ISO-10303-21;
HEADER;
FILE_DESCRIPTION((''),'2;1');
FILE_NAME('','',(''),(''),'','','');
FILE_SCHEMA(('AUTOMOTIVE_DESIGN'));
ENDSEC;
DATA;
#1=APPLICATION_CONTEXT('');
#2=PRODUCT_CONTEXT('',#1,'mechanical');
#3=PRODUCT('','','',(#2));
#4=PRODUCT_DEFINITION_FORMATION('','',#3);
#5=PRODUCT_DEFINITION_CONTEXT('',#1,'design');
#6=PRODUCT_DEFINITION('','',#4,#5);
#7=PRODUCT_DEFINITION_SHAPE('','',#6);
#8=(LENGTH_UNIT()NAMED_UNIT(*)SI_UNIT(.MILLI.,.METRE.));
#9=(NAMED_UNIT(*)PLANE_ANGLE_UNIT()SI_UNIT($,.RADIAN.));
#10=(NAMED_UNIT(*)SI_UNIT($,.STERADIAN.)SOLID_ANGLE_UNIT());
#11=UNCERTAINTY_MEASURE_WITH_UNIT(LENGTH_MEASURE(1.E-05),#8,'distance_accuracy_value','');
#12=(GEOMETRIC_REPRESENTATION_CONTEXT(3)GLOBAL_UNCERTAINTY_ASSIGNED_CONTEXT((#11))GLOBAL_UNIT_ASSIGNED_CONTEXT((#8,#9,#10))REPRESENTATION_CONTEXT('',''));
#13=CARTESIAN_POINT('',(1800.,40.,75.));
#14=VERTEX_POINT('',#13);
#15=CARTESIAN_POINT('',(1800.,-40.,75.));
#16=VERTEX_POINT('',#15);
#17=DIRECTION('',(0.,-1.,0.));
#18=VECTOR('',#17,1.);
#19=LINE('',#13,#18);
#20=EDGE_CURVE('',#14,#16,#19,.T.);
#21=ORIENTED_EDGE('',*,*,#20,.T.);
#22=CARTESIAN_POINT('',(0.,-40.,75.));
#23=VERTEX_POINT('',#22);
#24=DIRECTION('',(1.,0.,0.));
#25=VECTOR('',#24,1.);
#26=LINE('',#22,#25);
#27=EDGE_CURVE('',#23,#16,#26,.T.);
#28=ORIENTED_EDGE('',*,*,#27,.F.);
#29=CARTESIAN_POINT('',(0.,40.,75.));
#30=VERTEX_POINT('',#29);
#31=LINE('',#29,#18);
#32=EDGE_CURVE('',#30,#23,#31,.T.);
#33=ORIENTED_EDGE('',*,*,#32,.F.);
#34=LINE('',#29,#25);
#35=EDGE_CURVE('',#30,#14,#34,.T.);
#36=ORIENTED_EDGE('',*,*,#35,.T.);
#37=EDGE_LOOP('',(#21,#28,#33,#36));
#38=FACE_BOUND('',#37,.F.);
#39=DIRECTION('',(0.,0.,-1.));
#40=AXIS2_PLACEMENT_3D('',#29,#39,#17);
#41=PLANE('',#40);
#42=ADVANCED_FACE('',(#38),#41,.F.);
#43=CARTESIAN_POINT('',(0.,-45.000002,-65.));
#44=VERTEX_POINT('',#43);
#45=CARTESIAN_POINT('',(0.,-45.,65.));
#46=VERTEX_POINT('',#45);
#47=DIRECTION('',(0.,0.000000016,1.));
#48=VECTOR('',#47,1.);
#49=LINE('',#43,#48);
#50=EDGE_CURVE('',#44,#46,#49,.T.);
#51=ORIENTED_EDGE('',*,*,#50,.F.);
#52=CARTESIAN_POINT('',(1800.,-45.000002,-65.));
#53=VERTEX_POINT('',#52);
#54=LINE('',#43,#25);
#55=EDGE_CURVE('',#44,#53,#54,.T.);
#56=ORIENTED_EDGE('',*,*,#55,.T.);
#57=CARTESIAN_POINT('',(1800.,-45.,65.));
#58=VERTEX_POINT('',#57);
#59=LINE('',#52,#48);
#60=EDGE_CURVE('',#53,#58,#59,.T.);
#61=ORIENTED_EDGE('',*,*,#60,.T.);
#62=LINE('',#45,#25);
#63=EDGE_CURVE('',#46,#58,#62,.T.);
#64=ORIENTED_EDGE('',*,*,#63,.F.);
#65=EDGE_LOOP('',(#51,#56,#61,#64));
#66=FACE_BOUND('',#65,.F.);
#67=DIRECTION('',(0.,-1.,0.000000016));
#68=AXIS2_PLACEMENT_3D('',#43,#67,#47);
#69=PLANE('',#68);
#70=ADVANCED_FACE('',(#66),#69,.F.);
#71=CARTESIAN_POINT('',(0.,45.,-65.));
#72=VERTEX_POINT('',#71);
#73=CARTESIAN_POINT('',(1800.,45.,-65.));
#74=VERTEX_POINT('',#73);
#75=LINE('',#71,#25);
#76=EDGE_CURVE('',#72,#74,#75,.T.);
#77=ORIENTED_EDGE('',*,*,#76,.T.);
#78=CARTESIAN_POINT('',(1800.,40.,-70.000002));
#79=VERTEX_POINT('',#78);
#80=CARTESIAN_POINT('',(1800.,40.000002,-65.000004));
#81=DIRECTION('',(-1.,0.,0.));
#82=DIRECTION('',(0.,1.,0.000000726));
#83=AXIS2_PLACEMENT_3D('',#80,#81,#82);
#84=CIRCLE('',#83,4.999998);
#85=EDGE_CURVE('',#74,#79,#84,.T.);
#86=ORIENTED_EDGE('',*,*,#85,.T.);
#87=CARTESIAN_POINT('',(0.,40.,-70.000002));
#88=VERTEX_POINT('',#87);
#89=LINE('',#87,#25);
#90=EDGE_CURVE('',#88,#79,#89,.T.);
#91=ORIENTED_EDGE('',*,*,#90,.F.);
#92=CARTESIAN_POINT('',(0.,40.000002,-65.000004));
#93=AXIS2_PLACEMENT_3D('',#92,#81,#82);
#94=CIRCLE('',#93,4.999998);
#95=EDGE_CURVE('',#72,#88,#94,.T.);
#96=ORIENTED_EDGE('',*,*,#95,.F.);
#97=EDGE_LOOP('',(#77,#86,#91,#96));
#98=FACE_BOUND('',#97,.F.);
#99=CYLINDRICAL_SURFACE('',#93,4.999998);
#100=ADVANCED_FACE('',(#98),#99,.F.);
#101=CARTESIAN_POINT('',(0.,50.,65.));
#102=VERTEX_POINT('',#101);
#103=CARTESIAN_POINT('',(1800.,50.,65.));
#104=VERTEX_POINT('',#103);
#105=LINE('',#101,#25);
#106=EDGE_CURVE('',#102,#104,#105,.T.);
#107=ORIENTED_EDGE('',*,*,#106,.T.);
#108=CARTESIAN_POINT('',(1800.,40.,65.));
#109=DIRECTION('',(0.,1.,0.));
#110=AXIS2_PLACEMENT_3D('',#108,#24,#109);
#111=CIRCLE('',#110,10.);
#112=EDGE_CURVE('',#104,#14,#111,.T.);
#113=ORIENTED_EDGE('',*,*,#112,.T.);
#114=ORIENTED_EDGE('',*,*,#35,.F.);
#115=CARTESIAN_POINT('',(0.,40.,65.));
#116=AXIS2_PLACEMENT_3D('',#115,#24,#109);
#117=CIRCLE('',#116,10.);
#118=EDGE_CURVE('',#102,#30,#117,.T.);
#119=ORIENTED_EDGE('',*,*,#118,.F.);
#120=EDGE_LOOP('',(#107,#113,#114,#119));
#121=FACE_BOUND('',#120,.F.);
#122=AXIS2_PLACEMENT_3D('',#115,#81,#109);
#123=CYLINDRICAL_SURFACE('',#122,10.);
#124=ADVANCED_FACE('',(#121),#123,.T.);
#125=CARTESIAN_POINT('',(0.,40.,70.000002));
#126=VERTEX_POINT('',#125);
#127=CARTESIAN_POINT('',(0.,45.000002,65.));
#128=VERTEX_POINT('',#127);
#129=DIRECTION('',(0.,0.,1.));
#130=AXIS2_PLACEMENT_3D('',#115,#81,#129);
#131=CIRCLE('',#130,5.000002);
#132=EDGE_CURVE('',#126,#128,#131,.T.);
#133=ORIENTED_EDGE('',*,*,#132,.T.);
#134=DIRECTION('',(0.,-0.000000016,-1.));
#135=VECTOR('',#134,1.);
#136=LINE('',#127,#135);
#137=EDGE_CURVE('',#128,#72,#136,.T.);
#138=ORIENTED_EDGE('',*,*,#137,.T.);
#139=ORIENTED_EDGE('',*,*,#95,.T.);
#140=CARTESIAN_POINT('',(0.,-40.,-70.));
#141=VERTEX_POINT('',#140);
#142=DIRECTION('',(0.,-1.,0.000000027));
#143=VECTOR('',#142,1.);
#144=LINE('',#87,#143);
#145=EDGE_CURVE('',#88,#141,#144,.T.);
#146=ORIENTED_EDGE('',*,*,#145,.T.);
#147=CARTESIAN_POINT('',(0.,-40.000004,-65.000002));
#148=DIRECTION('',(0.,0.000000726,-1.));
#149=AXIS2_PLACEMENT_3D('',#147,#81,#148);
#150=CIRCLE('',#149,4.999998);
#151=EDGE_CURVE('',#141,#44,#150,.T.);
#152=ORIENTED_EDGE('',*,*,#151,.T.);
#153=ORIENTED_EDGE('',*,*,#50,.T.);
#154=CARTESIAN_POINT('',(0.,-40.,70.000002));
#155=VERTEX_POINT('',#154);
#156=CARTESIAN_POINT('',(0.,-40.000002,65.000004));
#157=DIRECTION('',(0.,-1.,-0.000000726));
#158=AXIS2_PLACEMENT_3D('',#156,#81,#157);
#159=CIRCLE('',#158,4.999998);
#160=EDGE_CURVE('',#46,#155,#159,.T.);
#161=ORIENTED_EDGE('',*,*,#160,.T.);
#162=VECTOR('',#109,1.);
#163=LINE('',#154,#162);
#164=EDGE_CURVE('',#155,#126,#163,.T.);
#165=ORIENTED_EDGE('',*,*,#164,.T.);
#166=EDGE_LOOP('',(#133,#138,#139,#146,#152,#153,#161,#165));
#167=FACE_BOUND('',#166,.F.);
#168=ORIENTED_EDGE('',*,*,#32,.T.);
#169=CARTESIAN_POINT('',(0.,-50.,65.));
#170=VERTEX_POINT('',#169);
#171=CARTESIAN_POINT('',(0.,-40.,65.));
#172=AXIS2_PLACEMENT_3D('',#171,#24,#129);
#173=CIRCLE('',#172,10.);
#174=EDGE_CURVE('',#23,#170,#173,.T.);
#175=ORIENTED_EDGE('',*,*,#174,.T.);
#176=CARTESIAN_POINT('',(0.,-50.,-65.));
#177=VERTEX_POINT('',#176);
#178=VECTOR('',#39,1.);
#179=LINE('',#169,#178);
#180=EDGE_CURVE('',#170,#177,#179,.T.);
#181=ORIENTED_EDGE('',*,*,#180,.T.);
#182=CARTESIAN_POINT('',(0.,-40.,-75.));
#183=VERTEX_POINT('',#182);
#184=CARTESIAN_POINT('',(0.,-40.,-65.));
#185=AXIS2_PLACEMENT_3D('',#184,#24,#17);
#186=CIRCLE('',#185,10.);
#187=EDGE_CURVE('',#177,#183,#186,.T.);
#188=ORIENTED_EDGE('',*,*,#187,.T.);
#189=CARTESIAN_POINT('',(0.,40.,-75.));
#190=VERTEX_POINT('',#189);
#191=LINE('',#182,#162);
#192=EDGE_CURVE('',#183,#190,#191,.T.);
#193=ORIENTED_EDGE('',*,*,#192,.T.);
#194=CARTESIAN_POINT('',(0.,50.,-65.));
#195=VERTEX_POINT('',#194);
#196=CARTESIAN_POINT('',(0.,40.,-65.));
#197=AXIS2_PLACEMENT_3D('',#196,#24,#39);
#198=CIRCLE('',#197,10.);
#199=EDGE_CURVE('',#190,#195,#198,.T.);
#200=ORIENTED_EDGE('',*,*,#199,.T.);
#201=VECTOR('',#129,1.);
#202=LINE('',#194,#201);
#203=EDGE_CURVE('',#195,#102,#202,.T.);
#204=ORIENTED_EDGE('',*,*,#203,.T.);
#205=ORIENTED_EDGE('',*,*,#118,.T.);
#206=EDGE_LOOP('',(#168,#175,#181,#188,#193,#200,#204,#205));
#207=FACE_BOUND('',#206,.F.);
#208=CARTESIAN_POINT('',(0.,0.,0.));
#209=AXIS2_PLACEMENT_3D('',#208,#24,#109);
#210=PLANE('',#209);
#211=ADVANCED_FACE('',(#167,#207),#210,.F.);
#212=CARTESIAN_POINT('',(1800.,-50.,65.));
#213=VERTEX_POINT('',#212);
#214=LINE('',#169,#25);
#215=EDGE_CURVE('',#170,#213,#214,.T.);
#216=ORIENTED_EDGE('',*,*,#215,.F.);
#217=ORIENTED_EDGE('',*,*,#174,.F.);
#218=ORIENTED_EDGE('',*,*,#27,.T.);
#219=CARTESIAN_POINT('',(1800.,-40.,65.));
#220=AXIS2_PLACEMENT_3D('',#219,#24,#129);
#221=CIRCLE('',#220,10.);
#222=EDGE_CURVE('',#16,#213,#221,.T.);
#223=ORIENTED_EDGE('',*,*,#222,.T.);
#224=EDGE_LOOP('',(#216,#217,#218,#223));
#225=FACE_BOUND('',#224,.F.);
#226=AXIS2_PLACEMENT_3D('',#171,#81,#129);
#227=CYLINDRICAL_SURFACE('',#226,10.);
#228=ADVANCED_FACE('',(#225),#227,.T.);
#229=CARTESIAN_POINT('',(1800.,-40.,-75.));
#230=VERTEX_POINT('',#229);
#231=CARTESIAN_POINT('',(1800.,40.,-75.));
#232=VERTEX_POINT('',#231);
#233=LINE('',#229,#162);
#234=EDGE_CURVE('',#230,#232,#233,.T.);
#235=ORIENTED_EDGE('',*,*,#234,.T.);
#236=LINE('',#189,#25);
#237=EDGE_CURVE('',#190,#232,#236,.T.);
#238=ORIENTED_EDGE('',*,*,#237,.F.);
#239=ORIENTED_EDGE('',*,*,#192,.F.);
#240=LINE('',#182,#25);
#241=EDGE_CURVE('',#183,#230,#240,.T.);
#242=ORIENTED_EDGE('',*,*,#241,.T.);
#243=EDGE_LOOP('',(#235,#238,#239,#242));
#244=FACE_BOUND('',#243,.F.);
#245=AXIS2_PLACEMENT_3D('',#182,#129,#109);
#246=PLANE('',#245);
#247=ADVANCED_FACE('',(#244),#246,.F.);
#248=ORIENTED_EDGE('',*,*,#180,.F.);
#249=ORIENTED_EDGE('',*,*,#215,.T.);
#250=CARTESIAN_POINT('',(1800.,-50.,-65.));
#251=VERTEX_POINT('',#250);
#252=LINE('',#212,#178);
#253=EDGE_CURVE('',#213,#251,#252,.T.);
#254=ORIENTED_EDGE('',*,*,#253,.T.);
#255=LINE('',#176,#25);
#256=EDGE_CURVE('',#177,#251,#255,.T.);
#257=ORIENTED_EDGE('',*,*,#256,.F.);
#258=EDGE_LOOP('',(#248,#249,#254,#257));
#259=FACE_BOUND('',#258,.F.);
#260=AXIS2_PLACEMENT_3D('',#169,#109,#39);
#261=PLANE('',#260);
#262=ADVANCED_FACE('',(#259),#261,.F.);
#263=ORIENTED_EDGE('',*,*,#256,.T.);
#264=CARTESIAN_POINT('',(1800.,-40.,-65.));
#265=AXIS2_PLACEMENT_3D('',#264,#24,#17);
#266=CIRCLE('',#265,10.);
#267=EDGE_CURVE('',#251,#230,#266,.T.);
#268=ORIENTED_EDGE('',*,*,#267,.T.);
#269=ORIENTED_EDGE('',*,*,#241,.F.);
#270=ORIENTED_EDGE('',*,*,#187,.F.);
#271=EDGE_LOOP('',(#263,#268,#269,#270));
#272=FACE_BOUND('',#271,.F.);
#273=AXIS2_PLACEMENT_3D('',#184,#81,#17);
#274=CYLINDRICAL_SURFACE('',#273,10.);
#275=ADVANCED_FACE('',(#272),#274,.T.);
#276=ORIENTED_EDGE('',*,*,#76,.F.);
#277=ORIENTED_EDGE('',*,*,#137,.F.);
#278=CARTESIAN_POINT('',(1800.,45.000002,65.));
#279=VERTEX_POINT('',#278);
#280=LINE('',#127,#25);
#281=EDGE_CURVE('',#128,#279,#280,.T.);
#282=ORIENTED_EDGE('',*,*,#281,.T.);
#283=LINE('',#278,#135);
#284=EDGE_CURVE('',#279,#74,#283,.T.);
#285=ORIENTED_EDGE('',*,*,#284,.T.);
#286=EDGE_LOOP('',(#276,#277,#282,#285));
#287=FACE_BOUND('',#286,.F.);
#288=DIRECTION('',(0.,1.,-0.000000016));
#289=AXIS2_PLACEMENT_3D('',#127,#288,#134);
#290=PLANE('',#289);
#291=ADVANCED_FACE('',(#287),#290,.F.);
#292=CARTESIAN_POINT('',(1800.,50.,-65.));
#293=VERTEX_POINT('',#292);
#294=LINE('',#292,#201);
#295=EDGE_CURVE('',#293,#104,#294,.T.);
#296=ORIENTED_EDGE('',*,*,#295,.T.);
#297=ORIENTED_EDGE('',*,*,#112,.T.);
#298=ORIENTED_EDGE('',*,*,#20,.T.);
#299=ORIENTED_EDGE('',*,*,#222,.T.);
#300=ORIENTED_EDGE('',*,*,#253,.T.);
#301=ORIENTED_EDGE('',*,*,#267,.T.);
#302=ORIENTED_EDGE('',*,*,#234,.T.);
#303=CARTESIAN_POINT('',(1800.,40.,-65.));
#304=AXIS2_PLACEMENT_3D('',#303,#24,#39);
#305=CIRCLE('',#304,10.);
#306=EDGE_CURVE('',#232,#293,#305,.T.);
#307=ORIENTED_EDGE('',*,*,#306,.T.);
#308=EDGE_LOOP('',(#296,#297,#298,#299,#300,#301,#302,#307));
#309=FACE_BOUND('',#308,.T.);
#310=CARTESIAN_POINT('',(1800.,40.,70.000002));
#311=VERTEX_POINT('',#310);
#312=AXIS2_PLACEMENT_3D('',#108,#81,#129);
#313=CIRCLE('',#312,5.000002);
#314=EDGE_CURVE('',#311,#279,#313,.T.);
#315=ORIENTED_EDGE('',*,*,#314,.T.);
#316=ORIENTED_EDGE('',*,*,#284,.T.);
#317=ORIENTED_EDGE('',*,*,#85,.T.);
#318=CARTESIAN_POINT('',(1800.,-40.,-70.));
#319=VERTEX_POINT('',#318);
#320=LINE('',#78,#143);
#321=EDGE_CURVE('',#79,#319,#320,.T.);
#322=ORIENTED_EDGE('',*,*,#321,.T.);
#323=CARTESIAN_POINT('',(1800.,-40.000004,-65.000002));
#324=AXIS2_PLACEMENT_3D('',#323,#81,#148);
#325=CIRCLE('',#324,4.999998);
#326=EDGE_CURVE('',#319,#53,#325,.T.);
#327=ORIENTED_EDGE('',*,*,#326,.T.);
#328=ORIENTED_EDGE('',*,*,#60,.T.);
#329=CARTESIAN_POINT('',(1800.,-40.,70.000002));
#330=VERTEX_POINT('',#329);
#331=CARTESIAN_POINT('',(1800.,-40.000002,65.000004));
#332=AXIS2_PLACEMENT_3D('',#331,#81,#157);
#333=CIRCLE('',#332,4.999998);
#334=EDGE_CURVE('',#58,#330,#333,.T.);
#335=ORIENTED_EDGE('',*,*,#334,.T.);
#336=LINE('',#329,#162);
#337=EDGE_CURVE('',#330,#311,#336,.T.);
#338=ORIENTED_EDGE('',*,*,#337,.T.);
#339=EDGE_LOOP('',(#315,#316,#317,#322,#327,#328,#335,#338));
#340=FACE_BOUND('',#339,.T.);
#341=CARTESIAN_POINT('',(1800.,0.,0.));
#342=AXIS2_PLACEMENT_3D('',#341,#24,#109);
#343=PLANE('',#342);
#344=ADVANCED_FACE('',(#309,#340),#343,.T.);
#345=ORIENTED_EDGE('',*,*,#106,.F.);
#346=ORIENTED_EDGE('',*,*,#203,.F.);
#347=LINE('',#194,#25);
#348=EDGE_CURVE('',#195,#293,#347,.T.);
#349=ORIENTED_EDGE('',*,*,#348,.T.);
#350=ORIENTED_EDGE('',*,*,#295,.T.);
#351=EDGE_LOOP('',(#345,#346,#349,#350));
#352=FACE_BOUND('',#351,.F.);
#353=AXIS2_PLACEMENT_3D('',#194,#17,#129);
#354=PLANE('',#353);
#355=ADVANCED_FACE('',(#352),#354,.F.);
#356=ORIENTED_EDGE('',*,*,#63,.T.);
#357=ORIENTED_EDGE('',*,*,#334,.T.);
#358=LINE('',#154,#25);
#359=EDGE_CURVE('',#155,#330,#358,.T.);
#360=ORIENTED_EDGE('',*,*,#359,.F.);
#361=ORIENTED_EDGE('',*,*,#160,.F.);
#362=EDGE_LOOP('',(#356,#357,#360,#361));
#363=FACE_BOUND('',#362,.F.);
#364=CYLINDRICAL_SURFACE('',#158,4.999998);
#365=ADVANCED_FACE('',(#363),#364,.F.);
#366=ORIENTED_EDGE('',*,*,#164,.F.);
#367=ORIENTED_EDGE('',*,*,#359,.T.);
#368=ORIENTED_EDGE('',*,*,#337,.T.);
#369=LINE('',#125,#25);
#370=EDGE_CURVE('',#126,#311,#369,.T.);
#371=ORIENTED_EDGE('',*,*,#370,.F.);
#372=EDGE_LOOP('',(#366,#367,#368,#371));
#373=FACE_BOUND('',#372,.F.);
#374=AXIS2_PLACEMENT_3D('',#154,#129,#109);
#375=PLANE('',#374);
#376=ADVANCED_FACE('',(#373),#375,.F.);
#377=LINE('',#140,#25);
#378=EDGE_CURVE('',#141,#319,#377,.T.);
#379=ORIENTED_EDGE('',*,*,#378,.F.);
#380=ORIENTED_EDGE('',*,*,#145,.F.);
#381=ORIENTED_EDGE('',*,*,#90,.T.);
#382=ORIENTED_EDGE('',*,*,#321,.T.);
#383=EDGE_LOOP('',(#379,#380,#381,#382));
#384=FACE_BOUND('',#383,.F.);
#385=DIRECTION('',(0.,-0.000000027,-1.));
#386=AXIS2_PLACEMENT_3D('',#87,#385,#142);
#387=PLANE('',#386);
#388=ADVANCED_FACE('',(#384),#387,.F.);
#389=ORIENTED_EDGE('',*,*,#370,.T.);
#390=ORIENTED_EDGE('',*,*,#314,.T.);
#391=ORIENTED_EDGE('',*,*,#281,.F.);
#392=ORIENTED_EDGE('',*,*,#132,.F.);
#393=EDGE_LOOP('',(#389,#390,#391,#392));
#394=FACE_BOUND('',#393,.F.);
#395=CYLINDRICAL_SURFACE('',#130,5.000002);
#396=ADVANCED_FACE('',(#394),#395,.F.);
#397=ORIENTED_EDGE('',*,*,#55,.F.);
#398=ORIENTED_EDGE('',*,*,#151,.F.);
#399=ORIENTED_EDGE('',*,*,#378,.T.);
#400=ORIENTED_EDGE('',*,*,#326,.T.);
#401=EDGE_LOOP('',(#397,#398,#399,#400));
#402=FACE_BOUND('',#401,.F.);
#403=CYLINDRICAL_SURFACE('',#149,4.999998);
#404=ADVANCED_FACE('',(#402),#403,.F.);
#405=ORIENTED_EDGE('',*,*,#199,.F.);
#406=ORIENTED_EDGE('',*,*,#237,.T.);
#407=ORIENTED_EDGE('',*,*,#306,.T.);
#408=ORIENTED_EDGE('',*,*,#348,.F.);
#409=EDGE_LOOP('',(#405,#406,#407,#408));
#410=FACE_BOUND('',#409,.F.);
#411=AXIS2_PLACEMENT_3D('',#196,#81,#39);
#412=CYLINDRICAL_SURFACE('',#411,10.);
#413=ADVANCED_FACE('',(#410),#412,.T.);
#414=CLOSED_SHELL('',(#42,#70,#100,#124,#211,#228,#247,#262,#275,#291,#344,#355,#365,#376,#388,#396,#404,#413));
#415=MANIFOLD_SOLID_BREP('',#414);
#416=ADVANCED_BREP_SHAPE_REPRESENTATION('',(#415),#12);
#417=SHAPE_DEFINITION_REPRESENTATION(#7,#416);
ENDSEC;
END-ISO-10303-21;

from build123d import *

# Parameters (mm, degrees)
F1_DEPTH = 1800


# Not quite as in the source:
# - ends of sketch curves that miss each other by under 0.0002 mm in the source are joined


with BuildPart() as f1:
    # F0 (on Right) → F1 (new body)
    with BuildSketch(Plane.YZ):
        with BuildLine():
            ThreePointArc((50, 65), (47.0710678119, 72.0710678119), (40, 75))
            Line((40, 75), (-40, 75))
            ThreePointArc((-40, 75), (-47.0710678119, 72.0710678119), (-50, 65))
            Line((-50, 65), (-50, -65))
            ThreePointArc((-50, -65), (-47.0710678119, -72.0710678119), (-40, -75))
            Line((-40, -75), (40, -75))
            ThreePointArc((40, -75), (47.0710678119, -72.0710678119), (50, -65))
            Line((50, -65), (50, 65))
        make_face()
        with BuildLine():
            ThreePointArc((40, 70.0000021271), (43.53553541, 68.53553541), (45.0000021271, 65))
            Line((45.0000021271, 65), (45, -65))
            ThreePointArc((45, -65), (43.53553541, -68.53553541), (40, -70.0000021271))
            Line((40, -70.0000021271), (-40, -70))
            ThreePointArc((-40, -70), (-43.53553541, -68.53553541), (-45.0000021271, -65))
            Line((-45.0000021271, -65), (-45, 65))
            ThreePointArc((-45, 65), (-43.53553541, 68.53553541), (-40, 70.0000021271))
            Line((-40, 70.0000021271), (40, 70.0000021271))
        make_face(mode=Mode.SUBTRACT)
    extrude(amount=F1_DEPTH)


solid = f1.part
